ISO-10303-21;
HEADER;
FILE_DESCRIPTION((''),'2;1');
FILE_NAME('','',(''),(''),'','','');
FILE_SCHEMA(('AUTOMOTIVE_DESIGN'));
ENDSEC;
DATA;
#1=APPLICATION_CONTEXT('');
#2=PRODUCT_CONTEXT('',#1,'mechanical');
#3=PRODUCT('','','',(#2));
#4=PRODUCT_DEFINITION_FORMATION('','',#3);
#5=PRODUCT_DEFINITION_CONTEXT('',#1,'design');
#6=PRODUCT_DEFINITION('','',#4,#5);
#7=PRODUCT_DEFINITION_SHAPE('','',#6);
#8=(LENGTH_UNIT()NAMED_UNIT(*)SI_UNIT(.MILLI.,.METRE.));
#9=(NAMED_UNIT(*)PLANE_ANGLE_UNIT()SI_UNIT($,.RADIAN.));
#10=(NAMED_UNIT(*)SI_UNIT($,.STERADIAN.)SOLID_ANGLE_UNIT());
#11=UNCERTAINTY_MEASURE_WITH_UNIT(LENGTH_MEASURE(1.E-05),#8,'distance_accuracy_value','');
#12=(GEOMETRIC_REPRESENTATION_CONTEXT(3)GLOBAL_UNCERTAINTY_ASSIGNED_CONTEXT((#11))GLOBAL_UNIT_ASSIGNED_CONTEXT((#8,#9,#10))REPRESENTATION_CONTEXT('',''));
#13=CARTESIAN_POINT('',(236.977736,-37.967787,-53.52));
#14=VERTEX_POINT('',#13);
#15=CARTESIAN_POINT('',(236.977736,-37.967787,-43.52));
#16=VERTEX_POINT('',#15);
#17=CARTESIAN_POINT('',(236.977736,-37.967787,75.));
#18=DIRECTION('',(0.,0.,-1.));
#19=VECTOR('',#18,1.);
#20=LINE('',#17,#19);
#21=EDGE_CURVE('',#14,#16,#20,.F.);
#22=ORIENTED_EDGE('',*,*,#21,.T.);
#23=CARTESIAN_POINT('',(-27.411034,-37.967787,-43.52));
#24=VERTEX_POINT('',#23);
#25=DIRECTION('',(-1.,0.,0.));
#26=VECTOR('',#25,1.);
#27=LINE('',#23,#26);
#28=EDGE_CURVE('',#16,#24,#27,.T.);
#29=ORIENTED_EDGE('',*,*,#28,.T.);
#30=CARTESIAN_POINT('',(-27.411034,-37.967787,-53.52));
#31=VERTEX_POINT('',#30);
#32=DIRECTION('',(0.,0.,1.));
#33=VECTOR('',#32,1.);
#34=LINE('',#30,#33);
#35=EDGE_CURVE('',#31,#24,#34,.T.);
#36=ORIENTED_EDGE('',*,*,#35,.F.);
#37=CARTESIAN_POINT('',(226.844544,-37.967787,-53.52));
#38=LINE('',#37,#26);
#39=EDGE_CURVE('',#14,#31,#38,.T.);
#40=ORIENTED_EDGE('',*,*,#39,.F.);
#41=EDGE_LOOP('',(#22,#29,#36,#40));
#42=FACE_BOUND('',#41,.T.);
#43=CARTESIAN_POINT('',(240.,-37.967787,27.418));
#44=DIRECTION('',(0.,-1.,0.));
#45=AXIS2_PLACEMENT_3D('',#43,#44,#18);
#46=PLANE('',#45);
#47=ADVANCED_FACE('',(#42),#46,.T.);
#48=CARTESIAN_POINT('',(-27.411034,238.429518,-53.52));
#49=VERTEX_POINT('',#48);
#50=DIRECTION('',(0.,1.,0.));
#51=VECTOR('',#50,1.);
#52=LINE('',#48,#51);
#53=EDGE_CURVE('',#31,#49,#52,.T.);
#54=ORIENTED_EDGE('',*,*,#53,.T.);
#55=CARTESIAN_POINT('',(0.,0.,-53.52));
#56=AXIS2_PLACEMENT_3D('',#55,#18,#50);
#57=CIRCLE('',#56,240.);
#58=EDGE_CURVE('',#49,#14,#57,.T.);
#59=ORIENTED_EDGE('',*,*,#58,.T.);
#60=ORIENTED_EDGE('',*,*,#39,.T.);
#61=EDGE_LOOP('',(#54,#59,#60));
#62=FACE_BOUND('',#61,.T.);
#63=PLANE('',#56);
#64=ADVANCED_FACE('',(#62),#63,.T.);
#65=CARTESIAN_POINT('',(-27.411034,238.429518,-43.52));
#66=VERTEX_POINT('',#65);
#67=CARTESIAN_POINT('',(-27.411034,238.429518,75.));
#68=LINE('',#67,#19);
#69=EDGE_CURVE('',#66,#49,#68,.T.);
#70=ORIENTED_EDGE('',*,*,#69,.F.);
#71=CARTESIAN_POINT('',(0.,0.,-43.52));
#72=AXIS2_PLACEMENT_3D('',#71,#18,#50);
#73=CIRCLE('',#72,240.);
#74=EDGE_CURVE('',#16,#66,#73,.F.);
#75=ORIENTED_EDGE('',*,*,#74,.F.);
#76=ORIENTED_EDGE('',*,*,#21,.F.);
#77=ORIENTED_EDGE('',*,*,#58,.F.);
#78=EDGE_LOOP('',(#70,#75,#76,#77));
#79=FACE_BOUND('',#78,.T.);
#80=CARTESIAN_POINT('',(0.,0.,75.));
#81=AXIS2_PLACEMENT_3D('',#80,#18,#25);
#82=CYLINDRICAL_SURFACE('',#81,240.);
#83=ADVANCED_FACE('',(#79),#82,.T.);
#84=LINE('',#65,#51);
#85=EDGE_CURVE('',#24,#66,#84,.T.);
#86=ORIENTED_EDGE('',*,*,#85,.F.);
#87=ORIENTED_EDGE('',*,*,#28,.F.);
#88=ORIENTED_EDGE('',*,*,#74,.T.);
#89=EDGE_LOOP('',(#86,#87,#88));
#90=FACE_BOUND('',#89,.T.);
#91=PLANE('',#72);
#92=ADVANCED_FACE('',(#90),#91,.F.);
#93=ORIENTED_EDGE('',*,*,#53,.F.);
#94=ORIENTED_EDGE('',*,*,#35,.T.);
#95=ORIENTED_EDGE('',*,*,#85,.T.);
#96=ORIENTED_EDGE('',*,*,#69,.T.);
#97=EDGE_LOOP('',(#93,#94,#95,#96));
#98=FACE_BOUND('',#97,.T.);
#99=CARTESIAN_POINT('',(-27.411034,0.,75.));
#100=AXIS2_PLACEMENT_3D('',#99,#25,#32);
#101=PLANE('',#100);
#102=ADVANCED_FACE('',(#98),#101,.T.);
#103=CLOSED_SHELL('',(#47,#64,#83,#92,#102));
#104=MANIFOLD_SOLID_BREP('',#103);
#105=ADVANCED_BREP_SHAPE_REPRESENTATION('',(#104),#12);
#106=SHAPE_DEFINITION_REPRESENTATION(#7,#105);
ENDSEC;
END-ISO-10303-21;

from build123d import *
from build123d.topology import SkipClean

# Parameters (mm, degrees)
SKETCH1_R           = 240
BOSS_EXTRUDE1_DEPTH = 10
BOSS_EXTRUDE2_START = 102.52
SKETCH2_R           = 240
SKETCH2_R_2         = 230
BOSS_EXTRUDE2_DEPTH = 102.52
CUT_EXTRUDE1_START  = -112.52
CUT_EXTRUDE1_DEPTH  = 112.52
BOSS_EXTRUDE4_START = 6
BOSS_EXTRUDE4_DEPTH = 6
CUT_EXTRUDE2_DEPTH  = 348.598906788
BOSS_EXTRUDE6_START = 10
BOSS_EXTRUDE6_DEPTH = 10
CUT_EXTRUDE3_START  = -118.52
CUT_EXTRUDE3_DEPTH  = 118.52


# Read off the part's stored shape, not the designer's step: Cut-Extrude1
with BuildPart() as part:
    # Sketch1 → Boss-Extrude1 (new body)
    with BuildSketch(Plane.XY.offset(65)):
        Circle(SKETCH1_R)
    extrude(amount=BOSS_EXTRUDE1_DEPTH)

    # Sketch2 → Boss-Extrude2 (add)
    with BuildSketch(Plane(origin=(0, 0, 65), x_dir=(-1, 0, 0), z_dir=(0, 0, -1)).offset(BOSS_EXTRUDE2_START)):
        Circle(SKETCH2_R)
        Circle(SKETCH2_R_2, mode=Mode.SUBTRACT)
    extrude(amount=-BOSS_EXTRUDE2_DEPTH)

    # Cut-Extrude1 outline → Cut-Extrude1 (cut)
    with BuildSketch(Plane(origin=(0, 0, -37.52), x_dir=(-1, 0, 0), z_dir=(0, 0, -1)).offset(CUT_EXTRUDE1_START)):
        with BuildLine():
            ThreePointArc((-87.384683401, -223.526099386), (232.916203487, -57.879548662), (27.411033925, 238.429518347))
            Line((27.411033925, 238.429518347), (27.411033925, -223.526099386))
            Line((27.411033925, -223.526099386), (-87.384683401, -223.526099386))
        make_face()
    extrude(amount=CUT_EXTRUDE1_DEPTH, mode=Mode.SUBTRACT)

    # Sketch5 → Boss-Extrude4 (add)
    with SkipClean():  # the faces are left unmerged after this step: merging them gives an invalid solid
        with BuildSketch(Plane(origin=(0, 0, -37.52), x_dir=(-1, 0, 0), z_dir=(0, 0, -1)).offset(BOSS_EXTRUDE4_START)):
            with BuildLine():
                Line((27.411033925, 228.360756741), (27.411033925, 238.429518347))
                ThreePointArc((27.411033925, 238.429518347), (-173.515297538, 165.808448277), (-236.939158864, -38.207787126))
                Line((-236.939158864, -38.207787126), (-226.804243794, -38.207787126))
                ThreePointArc((-226.804243794, -38.207787126), (-166.445517153, 158.732132285), (27.411033925, 228.360756741))
            make_face()
        extrude(amount=-BOSS_EXTRUDE4_DEPTH)

    # Sketch7 → Cut-Extrude2 (cut, through all)
    with SkipClean():  # the faces are left unmerged after this step: merging them gives an invalid solid
        with BuildSketch(Plane(origin=(0, 0, 0), x_dir=(0, 0, -1), z_dir=(1, 0, 0))):
            Polygon((-26.398, -50.207787126), (37.52, -50.207787126), (43.52, -50.207787126), (43.52, -37.967787126), (-27.418, -37.967787126), (-27.418, -49.187787126), (-27.418, -50.207787126), align=None)
        extrude(amount=CUT_EXTRUDE2_DEPTH, mode=Mode.SUBTRACT)

    # Sketch9 → Boss-Extrude6 (add)
    with SkipClean():  # the faces are left unmerged after this step: merging them gives an invalid solid
        with BuildSketch(Plane(origin=(0, 0, -43.52), x_dir=(-1, 0, 0), z_dir=(0, 0, -1)).offset(BOSS_EXTRUDE6_START)):
            with BuildLine():
                Line((-226.844543996, -37.967787126), (-236.977735538, -37.967787126))
                ThreePointArc((-236.977735538, -37.967787126), (-173.431306933, 165.896298258), (27.411033925, 238.429518347))
                Line((27.411033925, 238.429518347), (27.411033925, -37.967787126))
                Line((27.411033925, -37.967787126), (-226.844543996, -37.967787126))
            make_face()
        extrude(amount=-BOSS_EXTRUDE6_DEPTH)

    # Sketch10 → Cut-Extrude3 (cut)
    with BuildSketch(Plane.XY.offset(75).offset(CUT_EXTRUDE3_START)):
        with BuildLine():
            Line((-27.411033925, 238.429518347), (-27.411033925, -223.526099386))
            Line((-27.411033925, -223.526099386), (87.384683401, -223.526099386))
            ThreePointArc((87.384683401, -223.526099386), (232.916203487, 57.879548662), (-27.411033925, 238.429518347))
        make_face()
    extrude(amount=CUT_EXTRUDE3_DEPTH, mode=Mode.SUBTRACT)


solid = part.part
